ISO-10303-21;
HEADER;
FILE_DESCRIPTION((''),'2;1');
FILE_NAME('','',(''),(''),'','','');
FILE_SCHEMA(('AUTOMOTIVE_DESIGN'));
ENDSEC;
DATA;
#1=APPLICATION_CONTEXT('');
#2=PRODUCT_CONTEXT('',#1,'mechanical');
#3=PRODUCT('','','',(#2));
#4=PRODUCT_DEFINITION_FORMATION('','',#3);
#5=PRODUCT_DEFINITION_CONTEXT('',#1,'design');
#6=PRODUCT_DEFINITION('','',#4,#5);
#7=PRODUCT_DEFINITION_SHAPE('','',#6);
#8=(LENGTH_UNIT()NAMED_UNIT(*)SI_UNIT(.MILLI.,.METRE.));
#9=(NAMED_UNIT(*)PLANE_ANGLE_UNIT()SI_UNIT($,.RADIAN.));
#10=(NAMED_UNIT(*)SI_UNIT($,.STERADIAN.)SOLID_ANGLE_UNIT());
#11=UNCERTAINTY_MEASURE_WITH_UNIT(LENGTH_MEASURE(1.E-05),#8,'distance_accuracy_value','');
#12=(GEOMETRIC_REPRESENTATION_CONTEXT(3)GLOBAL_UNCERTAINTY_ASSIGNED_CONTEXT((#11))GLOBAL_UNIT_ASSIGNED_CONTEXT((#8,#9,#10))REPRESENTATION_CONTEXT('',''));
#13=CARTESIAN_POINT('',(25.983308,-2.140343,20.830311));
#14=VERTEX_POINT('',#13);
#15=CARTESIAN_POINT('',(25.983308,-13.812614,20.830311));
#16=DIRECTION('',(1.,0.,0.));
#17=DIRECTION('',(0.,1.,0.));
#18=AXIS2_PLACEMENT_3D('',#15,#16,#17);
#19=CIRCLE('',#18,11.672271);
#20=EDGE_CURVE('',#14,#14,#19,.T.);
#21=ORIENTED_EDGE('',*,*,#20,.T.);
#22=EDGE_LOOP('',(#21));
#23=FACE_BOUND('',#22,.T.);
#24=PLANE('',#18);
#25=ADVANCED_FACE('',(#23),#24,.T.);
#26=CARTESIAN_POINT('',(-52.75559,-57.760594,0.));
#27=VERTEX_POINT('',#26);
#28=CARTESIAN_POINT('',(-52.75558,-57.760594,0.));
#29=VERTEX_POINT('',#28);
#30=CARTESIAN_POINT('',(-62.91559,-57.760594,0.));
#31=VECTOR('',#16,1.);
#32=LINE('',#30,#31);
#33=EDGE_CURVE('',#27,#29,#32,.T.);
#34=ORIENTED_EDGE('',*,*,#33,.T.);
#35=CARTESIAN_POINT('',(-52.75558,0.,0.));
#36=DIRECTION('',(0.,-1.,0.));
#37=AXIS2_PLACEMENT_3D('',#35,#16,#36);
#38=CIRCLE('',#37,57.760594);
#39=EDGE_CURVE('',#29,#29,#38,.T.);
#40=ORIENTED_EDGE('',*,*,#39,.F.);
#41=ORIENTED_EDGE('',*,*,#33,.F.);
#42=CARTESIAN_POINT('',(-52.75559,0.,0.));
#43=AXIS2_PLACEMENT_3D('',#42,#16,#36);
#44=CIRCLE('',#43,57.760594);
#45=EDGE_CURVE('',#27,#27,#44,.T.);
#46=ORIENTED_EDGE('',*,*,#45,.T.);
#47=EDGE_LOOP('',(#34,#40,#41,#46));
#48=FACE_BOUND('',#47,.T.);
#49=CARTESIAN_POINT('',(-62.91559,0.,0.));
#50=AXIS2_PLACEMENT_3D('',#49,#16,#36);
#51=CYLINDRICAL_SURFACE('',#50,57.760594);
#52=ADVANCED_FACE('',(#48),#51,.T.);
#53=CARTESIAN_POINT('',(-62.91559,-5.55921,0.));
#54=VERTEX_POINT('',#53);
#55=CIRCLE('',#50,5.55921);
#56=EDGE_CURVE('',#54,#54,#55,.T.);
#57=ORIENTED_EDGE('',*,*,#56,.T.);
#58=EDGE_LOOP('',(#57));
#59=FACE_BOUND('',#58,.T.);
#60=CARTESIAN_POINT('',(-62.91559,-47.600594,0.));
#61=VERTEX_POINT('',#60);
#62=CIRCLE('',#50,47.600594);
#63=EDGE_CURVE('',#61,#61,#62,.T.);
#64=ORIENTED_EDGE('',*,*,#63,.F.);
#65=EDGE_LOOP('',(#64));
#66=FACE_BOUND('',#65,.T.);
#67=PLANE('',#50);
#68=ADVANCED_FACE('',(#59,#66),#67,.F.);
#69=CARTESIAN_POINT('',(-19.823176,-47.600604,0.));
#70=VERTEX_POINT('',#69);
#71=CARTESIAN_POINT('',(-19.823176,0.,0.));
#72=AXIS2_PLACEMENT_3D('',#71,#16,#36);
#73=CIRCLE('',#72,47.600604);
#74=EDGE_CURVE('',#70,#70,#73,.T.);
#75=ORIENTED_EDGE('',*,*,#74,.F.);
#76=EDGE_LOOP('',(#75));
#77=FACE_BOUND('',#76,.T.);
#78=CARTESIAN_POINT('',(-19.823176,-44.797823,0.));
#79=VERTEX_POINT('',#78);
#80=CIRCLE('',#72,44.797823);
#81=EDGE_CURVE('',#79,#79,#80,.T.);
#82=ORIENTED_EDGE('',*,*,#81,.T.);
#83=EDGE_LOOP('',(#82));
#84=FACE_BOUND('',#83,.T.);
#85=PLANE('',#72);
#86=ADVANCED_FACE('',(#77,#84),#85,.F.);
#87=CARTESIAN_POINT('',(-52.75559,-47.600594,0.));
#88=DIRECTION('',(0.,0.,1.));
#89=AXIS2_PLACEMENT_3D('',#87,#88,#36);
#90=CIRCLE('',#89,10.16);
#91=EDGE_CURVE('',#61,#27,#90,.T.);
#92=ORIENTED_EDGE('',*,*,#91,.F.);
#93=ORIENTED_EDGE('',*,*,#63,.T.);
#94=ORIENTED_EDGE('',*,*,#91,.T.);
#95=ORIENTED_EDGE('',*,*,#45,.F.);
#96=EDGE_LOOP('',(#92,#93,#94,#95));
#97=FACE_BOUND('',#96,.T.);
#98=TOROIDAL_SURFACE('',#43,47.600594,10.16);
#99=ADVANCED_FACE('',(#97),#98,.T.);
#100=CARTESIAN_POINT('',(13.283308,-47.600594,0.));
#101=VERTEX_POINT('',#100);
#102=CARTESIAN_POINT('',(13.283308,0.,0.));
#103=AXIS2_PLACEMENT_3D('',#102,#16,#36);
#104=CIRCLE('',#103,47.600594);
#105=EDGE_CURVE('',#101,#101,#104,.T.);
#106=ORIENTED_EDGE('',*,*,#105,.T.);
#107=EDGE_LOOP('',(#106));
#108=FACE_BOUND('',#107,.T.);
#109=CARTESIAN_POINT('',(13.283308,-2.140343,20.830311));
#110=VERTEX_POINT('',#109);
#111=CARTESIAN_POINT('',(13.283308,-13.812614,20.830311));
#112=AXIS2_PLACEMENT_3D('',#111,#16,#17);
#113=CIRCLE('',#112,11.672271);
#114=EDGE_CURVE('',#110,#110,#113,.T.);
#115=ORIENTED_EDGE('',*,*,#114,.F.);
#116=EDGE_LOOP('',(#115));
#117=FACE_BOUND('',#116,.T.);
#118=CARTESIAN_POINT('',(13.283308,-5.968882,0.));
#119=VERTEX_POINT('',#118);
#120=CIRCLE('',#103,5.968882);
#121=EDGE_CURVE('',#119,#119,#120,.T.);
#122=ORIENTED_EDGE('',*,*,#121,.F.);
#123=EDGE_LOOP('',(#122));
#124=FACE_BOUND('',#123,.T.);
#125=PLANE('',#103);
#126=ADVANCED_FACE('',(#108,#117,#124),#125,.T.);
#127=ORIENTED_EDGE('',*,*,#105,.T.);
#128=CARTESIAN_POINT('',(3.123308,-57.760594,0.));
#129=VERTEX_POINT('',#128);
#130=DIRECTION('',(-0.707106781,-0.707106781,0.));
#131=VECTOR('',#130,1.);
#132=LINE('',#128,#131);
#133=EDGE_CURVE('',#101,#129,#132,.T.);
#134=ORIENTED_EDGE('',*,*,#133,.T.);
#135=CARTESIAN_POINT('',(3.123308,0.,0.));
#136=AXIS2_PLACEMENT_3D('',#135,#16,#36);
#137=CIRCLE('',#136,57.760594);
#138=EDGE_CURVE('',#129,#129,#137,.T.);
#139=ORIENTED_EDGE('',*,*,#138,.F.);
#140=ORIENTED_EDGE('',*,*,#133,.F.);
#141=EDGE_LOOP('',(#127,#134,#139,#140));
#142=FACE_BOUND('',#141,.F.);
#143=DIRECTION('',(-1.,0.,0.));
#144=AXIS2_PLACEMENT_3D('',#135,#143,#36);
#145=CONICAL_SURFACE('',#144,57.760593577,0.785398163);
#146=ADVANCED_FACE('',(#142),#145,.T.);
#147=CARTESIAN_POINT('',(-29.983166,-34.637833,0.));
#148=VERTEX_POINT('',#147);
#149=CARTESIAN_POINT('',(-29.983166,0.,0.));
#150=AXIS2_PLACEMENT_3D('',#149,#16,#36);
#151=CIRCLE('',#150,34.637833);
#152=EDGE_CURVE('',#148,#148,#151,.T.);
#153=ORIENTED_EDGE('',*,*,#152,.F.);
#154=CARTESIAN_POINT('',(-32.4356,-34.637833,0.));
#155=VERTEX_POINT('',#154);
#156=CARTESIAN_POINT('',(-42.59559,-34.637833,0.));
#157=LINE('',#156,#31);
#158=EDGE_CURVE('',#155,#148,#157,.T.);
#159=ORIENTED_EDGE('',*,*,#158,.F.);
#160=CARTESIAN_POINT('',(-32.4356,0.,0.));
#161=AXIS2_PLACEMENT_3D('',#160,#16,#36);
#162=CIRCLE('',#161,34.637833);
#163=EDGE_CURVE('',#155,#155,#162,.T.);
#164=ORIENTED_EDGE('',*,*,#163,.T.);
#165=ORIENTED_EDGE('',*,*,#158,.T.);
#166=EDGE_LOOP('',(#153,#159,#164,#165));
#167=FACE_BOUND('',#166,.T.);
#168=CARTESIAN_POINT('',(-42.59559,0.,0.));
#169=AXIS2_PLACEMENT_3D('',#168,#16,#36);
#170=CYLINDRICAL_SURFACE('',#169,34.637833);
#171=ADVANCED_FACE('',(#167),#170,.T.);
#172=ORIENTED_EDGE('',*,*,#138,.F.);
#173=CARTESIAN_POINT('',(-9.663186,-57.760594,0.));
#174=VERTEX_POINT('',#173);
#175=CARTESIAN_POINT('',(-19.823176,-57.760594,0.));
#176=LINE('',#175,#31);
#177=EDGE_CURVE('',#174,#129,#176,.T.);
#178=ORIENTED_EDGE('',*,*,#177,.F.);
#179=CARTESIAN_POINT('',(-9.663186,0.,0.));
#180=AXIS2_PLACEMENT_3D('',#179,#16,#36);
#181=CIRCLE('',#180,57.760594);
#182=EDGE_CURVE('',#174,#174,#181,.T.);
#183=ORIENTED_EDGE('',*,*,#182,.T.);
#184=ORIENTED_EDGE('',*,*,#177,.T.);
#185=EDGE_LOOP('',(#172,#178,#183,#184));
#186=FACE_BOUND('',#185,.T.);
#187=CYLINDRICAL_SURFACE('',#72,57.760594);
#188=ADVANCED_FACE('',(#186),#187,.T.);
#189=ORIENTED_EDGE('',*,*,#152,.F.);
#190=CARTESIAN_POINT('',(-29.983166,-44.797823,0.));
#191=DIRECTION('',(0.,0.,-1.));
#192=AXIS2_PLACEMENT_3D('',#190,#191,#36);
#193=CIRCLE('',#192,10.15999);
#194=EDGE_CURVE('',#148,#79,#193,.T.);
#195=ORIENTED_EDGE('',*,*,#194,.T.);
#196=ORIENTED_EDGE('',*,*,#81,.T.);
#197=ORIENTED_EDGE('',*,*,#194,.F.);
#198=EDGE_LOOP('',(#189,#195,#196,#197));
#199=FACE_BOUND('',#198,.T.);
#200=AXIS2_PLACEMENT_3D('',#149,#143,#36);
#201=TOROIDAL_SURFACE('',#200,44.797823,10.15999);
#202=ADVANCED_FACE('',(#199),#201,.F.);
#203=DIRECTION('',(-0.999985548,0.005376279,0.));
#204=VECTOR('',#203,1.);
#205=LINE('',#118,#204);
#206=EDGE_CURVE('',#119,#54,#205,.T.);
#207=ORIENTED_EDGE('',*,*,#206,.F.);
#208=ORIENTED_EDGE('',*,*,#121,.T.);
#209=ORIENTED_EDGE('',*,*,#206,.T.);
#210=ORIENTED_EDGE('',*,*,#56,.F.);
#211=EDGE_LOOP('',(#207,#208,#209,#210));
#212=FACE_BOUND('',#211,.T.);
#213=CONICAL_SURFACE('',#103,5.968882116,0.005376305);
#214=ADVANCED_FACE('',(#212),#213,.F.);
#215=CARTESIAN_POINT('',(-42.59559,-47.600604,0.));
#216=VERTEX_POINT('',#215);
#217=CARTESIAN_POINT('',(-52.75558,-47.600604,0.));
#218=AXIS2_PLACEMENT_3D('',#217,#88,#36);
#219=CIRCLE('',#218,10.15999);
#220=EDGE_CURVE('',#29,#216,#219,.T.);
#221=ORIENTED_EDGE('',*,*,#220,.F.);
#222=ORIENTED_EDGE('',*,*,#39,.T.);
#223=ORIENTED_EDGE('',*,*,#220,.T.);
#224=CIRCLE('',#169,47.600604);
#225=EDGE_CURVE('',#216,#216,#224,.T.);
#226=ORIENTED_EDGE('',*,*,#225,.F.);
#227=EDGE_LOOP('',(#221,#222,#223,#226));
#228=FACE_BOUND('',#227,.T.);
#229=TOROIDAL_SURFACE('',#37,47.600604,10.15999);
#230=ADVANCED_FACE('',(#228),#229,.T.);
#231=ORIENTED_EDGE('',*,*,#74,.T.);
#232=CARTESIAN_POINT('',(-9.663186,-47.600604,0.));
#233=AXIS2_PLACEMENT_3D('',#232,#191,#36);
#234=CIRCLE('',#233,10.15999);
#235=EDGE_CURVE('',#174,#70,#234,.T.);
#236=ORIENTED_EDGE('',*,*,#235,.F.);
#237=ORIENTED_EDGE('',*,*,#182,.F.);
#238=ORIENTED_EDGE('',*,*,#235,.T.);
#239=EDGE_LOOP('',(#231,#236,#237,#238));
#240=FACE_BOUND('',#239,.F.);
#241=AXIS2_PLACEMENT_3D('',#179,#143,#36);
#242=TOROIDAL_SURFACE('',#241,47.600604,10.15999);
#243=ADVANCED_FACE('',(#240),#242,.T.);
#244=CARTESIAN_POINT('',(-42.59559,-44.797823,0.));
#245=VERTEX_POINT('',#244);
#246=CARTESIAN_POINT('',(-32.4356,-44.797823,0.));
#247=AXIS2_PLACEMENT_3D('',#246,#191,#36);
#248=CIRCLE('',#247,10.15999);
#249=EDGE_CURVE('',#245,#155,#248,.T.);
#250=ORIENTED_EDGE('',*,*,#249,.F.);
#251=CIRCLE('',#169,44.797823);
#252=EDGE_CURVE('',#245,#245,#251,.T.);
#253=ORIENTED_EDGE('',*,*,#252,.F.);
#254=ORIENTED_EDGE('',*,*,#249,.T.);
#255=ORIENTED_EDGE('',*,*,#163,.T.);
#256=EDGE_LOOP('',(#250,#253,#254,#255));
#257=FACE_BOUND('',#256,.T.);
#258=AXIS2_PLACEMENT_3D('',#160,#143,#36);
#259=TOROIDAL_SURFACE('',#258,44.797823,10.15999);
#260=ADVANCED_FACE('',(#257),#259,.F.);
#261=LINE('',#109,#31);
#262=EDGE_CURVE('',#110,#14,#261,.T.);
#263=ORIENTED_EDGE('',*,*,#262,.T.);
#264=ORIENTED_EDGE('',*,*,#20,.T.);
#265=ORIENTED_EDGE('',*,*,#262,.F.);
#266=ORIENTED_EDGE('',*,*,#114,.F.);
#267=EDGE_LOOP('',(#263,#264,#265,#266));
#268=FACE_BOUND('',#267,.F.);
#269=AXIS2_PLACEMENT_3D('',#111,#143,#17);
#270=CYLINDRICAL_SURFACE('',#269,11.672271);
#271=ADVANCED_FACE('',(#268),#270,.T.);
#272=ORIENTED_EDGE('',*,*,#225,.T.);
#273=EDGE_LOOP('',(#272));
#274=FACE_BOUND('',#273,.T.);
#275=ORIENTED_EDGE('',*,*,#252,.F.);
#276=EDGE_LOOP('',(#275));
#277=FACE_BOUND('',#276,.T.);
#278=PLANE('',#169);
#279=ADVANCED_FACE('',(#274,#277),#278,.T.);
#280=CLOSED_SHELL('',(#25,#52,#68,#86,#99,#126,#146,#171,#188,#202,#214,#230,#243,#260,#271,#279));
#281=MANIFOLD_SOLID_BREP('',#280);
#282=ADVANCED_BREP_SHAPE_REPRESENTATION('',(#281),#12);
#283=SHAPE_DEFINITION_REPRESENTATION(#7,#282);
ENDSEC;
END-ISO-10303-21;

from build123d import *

# Parameters (mm, degrees)
F2_R     = 10.16
F3_R     = 10.15999
F4_SIZE  = 10.16
F5_R     = 11.6722711508
F6_DEPTH = 12.7


# Not quite as in the source:
# - a fillet or chamfer is up to 0.001 mm smaller than in the source, because OpenCascade refuses the exact size


with BuildPart() as f1:
    # F0 (on Top) → F1 (revolve)
    with BuildSketch(Plane.XY):
        Polygon((13.2833082484, -5.9688821161), (-62.9155904868, -5.5592096381), (-62.9155904868, -57.7605935774), (-42.5955904868, -57.7605935774), (-42.5955904868, -34.6378330882), (-19.8231756745, -34.6378330882), (-19.8231756745, -57.7605935774), (13.2833082484, -57.7605935774), align=None)
    revolve(axis=Axis((2.649359405, 0, 0), (1, 0, 0)))

    # F2
    f2_edges = [f1.edges().sort_by_distance(p)[0] for p in [
        (-62.91559, 57.760594, 0),
    ]]
    fillet(f2_edges, radius=F2_R)

    # F3 (radius 10.16 in the source; OpenCascade refuses exactly that, so slightly less here)
    f3_edges = [f1.edges().sort_by_distance(p)[0] for p in [
        (-19.823176, 57.760594, 0),
        (-19.823176, 34.637833, 0),
        (-42.59559, 57.760594, 0),
        (-52.75559, 57.760594, 0),
        (-42.59559, 34.637833, 0),
    ]]
    fillet(f3_edges, radius=F3_R)

    # F4
    f4_edges = [f1.edges().sort_by_distance(p)[0] for p in [
        (13.283308, 57.760594, 0),
    ]]
    chamfer(f4_edges, length=F4_SIZE)

    # F5 (on face) → F6 (join)
    with BuildSketch(Plane.YZ.offset(13.2833082484)):
        with Locations((-13.8126136735, 20.8303108811)):
            Circle(F5_R)
    extrude(amount=F6_DEPTH)


solid = f1.part
